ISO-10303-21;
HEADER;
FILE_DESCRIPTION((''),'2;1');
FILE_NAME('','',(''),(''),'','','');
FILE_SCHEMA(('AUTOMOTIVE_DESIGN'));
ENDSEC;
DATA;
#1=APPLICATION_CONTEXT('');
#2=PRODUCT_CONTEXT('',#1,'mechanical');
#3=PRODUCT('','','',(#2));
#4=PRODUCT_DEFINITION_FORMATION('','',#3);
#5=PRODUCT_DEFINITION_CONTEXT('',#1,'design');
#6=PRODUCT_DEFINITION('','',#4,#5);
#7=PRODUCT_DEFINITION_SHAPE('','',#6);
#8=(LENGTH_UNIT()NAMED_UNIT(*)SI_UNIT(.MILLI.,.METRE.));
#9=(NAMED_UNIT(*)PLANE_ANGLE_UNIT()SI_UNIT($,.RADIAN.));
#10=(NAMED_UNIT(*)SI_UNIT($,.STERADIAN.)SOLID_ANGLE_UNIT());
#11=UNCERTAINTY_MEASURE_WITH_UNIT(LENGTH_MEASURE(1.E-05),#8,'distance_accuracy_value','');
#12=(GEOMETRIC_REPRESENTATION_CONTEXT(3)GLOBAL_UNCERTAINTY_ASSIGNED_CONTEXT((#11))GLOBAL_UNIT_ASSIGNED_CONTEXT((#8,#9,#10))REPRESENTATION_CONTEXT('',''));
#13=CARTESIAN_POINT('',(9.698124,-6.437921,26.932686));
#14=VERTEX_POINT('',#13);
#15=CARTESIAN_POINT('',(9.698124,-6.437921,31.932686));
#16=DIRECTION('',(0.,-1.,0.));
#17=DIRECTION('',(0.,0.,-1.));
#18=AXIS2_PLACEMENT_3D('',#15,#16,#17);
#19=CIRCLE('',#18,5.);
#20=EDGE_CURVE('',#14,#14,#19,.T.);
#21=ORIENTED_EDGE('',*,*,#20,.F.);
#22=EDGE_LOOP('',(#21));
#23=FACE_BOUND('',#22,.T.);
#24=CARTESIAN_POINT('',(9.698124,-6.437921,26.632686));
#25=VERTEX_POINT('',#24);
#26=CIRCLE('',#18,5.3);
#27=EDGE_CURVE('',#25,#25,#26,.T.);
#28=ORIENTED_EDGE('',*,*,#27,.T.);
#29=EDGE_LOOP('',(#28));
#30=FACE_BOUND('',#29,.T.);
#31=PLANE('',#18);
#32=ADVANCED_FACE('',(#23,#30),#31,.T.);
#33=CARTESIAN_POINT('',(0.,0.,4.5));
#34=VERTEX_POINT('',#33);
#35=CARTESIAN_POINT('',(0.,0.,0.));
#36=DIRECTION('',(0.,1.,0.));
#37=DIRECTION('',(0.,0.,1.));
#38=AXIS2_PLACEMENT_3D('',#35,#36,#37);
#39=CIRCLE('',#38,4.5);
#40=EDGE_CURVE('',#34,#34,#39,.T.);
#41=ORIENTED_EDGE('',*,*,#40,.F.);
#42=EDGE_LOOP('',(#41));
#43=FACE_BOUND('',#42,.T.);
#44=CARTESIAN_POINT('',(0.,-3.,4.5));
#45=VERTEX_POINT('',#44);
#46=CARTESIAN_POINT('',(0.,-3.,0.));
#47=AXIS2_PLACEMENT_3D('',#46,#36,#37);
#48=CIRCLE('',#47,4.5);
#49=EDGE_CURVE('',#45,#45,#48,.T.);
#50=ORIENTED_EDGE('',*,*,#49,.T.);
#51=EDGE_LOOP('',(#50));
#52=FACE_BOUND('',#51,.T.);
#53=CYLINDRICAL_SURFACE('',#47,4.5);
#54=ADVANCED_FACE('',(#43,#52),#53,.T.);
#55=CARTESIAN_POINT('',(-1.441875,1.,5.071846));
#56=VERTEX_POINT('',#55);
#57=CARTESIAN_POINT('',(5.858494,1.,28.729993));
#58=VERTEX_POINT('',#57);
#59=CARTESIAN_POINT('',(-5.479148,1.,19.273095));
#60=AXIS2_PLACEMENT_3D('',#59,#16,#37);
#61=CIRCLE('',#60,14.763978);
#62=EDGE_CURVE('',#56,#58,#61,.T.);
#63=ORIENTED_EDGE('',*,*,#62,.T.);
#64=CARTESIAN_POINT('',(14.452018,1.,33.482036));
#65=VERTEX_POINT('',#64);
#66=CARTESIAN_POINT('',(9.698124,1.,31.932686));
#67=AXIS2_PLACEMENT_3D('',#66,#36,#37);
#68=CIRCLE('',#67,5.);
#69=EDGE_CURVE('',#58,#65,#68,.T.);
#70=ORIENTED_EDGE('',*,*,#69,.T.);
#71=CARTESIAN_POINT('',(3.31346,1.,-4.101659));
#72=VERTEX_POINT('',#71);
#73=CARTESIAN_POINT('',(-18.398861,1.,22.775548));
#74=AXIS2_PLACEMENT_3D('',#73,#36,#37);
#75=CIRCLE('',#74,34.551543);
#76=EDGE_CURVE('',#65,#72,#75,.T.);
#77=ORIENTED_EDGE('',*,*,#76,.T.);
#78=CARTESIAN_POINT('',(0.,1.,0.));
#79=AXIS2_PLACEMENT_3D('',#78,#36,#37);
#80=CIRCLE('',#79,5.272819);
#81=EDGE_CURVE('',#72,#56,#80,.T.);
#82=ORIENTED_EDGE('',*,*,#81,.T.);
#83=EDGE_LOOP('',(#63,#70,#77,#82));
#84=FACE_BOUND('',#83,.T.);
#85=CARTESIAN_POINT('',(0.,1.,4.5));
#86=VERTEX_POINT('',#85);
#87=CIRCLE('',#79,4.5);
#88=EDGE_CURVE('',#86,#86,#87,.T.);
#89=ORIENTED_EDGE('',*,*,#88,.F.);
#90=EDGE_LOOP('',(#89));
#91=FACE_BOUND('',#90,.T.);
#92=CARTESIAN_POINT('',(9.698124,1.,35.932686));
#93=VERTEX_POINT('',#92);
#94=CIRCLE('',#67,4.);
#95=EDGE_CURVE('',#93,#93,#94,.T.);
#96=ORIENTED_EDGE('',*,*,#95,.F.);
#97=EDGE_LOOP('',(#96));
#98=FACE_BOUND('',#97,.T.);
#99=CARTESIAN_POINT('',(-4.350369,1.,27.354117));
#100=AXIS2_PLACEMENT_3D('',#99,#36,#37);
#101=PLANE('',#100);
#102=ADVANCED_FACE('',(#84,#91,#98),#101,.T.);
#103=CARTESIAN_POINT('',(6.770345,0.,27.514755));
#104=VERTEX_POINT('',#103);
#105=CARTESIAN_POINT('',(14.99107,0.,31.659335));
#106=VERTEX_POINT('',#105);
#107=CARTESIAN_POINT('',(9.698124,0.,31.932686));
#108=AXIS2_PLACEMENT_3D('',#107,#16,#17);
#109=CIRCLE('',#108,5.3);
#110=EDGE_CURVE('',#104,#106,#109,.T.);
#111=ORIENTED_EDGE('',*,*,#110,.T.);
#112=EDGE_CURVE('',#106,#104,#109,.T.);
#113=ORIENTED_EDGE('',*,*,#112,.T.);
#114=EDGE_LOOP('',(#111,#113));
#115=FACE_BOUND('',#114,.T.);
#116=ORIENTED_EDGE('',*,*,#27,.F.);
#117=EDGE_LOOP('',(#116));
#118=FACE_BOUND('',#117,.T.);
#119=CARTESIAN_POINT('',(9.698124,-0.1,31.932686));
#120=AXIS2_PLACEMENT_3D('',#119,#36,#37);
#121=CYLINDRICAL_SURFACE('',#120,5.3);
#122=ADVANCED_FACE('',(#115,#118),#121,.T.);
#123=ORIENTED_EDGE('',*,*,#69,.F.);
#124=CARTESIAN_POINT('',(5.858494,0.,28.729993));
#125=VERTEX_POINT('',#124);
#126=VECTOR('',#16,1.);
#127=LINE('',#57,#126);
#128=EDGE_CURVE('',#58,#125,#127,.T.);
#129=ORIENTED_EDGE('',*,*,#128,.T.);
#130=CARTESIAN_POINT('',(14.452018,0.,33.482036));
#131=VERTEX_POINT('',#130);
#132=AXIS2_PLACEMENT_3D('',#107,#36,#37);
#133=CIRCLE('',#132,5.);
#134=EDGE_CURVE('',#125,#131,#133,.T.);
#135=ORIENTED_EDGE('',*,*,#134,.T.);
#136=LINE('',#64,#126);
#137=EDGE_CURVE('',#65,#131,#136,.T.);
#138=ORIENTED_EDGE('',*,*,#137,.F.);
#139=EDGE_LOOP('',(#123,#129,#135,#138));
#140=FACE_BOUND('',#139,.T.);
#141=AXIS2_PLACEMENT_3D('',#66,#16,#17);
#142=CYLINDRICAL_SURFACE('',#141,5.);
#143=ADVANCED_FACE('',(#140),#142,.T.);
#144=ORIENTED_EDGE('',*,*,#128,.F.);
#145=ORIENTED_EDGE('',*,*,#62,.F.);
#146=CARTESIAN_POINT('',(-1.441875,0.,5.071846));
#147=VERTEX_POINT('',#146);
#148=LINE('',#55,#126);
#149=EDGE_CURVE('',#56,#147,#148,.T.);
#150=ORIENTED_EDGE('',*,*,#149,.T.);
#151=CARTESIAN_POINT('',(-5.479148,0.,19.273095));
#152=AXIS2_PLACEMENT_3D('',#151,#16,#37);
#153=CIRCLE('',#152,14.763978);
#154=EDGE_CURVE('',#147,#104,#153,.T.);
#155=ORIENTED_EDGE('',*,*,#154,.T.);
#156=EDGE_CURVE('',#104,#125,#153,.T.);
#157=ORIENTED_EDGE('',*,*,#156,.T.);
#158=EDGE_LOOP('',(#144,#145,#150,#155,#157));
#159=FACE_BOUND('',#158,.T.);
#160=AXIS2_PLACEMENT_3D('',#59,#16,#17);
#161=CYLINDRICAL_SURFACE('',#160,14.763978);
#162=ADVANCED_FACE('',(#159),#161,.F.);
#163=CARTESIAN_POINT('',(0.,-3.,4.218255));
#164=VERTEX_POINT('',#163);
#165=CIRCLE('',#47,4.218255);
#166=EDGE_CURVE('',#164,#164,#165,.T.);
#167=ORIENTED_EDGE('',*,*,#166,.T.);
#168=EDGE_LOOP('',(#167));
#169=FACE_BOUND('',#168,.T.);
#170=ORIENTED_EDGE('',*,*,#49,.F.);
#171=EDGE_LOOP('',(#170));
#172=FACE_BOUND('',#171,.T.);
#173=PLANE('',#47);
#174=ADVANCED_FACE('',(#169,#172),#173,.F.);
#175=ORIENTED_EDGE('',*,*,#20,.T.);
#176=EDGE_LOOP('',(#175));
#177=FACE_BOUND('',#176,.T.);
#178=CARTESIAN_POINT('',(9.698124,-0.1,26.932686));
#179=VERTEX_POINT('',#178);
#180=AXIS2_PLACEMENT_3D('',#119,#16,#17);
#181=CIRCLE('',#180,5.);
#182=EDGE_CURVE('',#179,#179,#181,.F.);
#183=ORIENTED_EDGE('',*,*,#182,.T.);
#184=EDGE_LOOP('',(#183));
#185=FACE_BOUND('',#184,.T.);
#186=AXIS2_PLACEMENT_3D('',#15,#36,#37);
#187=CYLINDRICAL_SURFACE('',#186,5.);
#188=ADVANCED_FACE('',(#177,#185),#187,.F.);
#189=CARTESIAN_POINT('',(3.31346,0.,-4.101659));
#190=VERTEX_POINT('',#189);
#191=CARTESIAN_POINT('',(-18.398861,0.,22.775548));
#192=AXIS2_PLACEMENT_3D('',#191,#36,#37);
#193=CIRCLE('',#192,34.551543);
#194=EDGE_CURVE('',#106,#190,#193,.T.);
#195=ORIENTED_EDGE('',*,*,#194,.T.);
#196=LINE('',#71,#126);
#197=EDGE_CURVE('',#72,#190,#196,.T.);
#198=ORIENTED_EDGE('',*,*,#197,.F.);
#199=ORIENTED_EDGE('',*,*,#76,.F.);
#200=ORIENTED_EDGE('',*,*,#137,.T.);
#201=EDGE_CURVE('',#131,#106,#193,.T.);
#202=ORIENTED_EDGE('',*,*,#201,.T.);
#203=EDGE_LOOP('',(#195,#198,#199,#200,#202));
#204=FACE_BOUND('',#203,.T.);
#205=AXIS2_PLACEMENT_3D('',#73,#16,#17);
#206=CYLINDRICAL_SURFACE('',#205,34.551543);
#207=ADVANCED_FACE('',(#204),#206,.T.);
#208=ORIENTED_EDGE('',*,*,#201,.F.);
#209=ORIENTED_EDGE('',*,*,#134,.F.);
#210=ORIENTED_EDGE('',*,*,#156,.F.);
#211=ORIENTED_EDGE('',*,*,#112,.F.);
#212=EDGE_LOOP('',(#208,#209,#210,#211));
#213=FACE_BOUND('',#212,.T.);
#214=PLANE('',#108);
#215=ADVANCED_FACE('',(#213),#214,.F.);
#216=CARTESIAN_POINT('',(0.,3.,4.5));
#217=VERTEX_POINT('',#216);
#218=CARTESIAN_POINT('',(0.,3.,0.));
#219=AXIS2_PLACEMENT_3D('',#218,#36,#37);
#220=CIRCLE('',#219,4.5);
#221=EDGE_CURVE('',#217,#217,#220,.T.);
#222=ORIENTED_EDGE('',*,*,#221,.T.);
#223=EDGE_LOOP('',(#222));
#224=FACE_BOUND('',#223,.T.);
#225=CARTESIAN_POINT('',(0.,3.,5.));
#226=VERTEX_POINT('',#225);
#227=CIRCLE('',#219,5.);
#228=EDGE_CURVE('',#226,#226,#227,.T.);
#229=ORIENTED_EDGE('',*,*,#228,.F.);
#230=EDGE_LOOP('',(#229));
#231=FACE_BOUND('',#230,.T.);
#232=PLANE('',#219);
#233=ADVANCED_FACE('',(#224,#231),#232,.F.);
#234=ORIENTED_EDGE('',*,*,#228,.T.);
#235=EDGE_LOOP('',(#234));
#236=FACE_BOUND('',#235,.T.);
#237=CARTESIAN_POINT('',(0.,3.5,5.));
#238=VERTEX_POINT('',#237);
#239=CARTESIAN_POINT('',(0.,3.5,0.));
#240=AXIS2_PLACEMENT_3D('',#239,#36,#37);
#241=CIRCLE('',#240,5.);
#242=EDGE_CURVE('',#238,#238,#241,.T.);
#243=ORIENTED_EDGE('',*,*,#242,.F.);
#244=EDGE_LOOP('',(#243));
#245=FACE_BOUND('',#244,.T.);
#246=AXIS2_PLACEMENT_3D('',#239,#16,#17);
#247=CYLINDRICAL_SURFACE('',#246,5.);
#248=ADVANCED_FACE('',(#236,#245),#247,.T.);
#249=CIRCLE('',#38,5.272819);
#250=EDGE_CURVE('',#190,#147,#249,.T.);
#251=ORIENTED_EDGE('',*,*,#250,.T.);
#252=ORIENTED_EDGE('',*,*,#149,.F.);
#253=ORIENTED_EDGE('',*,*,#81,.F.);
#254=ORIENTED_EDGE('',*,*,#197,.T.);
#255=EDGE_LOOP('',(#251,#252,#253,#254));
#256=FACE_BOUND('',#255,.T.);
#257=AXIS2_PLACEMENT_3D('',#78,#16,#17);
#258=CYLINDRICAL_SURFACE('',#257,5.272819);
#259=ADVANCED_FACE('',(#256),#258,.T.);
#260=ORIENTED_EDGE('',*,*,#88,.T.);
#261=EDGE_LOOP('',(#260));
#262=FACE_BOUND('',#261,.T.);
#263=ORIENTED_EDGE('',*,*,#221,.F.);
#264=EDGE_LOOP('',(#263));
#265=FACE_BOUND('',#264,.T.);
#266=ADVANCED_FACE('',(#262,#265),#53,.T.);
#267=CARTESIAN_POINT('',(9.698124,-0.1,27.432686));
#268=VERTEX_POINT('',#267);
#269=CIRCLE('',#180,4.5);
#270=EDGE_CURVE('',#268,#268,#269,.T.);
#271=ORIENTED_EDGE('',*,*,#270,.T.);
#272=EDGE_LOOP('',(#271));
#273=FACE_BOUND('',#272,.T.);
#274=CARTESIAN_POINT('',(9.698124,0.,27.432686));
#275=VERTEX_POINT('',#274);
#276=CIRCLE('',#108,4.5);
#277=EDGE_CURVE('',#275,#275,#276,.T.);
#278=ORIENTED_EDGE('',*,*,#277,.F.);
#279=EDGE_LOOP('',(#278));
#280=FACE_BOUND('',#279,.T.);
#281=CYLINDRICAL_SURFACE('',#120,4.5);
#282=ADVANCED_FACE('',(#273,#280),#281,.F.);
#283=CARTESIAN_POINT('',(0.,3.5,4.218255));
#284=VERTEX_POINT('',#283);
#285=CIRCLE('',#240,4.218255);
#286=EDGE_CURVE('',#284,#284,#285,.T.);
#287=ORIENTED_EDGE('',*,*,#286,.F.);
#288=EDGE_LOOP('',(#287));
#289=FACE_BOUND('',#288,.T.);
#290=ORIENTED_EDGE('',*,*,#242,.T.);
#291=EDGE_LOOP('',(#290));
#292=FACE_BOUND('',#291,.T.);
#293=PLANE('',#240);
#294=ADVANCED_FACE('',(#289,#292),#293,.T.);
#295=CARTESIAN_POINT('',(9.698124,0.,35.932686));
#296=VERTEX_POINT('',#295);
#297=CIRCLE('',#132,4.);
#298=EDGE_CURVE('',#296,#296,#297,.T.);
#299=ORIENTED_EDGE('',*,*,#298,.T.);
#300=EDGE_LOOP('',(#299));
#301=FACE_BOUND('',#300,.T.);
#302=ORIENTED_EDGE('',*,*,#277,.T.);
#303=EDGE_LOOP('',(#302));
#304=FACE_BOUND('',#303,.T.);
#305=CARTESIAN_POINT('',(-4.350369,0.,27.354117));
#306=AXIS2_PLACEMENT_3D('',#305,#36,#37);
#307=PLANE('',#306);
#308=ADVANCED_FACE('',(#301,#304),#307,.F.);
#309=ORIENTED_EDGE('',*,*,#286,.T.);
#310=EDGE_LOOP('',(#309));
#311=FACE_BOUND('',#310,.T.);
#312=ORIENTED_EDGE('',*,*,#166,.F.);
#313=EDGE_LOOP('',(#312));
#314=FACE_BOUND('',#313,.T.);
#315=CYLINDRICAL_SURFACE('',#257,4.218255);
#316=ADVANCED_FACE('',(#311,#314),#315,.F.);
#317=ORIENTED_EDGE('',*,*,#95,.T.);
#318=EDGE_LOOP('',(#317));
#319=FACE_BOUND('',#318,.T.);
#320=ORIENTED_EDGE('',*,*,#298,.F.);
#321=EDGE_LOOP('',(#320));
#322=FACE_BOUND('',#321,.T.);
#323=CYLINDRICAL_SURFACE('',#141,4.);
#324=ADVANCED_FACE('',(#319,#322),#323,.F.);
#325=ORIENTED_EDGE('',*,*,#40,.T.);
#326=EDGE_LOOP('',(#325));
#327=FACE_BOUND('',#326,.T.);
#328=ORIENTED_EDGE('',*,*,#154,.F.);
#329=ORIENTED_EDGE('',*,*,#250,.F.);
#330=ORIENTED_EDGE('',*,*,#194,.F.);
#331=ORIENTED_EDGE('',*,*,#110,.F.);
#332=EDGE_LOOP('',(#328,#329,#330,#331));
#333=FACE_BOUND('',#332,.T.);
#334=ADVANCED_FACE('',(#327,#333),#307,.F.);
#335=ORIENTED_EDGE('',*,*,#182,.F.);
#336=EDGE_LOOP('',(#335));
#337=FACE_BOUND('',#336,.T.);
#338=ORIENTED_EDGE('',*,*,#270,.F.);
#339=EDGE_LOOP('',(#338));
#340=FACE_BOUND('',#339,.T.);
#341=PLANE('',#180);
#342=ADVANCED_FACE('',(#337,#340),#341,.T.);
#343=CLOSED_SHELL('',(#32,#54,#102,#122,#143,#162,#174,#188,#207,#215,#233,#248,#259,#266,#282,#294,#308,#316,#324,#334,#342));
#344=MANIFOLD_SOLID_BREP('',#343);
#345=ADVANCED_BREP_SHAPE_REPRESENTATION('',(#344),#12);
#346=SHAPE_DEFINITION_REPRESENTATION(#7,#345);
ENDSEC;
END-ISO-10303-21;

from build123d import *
from build123d.topology import SkipClean

# Parameters (mm, degrees)
CROQUIS1_R                    = 4.218255418
CROQUIS1_R_2                  = 4
SALIENTE_EXTRUIR1_DEPTH       = 1
SALIENTE_EXTRUIR2_START       = -4
SALIENTE_EXTRUIR2_OUTLINE_R   = 4.5
SALIENTE_EXTRUIR2_OUTLINE_R_2 = 4.218255418
SALIENTE_EXTRUIR2_DEPTH       = 6
CROQUIS3_R                    = 5
CROQUIS3_R_2                  = 4.218255418
SALIENTE_EXTRUIR3_DEPTH       = 0.5
CROQUIS4_R                    = 5.3
CROQUIS4_R_2                  = 4.5
SALIENTE_EXTRUIR5_DEPTH       = 0.1
CROQUIS5_R                    = 5.3
CROQUIS5_R_2                  = 5
SALIENTE_EXTRUIR6_DEPTH       = 6.337921


# Read off the part's stored shape, not the designer's step: Saliente-Extruir2
with BuildPart() as part:
    # Croquis1 → Saliente-Extruir1 (new body)
    with BuildSketch(Plane(origin=(0, 0, 0), x_dir=(1, 0, 0), z_dir=(0, 1, 0))):
        with BuildLine():
            ThreePointArc((3.313459582, 4.10165926), (-4.681239764, 2.42664735), (-1.441875065, -5.071845757))
            ThreePointArc((-1.441875065, -5.071845757), (8.628437932, -14.919813028), (5.858493799, -28.729993067))
            ThreePointArc((5.858493799, -28.729993067), (7.278526743, -36.308249114), (14.452018201, -33.482036353))
            ThreePointArc((14.452018201, -33.482036353), (14.728457578, -12.957711758), (3.313459582, 4.10165926))
        make_face()
        with Locations(Location((0, 0, 0), (0, 0, 270))):
            Circle(CROQUIS1_R, mode=Mode.SUBTRACT)
        with Locations(Location((9.698123587, -31.932686167, 0), (0, 0, 270))):
            Circle(CROQUIS1_R_2, mode=Mode.SUBTRACT)
    extrude(amount=SALIENTE_EXTRUIR1_DEPTH)

    # Saliente-Extruir2 outline → Saliente-Extruir2 (add)
    with SkipClean():  # the faces are left unmerged after this step: merging them gives an invalid solid
        with BuildSketch(Plane(origin=(0, 1, 0), x_dir=(1, 0, 0), z_dir=(0, 1, 0)).offset(SALIENTE_EXTRUIR2_START)):
            Circle(SALIENTE_EXTRUIR2_OUTLINE_R)
            Circle(SALIENTE_EXTRUIR2_OUTLINE_R_2, mode=Mode.SUBTRACT)
        extrude(amount=SALIENTE_EXTRUIR2_DEPTH)

    # Croquis3 → Saliente-Extruir3 (add)
    with BuildSketch(Plane(origin=(0, 3, 0), x_dir=(1, 0, 0), z_dir=(0, 1, 0))):
        with Locations(Location((0, 0, 0), (0, 0, 270))):
            Circle(CROQUIS3_R)
        with Locations(Location((0, 0, 0), (0, 0, 270))):
            Circle(CROQUIS3_R_2, mode=Mode.SUBTRACT)
    extrude(amount=SALIENTE_EXTRUIR3_DEPTH)

    # Croquis4 → Saliente-Extruir5 (add)
    with BuildSketch(Plane.XZ):
        with Locations(Location((9.698123587, 31.932686167, 0), (0, 0, 357.04362328))):
            Circle(CROQUIS4_R)
        with Locations(Location((9.698123587, 31.932686167, 0), (0, 0, 270))):
            Circle(CROQUIS4_R_2, mode=Mode.SUBTRACT)
    extrude(amount=SALIENTE_EXTRUIR5_DEPTH)

    # Croquis5 → Saliente-Extruir6 (add)
    with BuildSketch(Plane.XZ.offset(0.1)):
        with Locations(Location((9.698123587, 31.932686167, 0), (0, 0, 357.04362328))):
            Circle(CROQUIS5_R)
        with Locations(Location((9.698123587, 31.932686167, 0), (0, 0, 270))):
            Circle(CROQUIS5_R_2, mode=Mode.SUBTRACT)
    extrude(amount=SALIENTE_EXTRUIR6_DEPTH)


solid = part.part
